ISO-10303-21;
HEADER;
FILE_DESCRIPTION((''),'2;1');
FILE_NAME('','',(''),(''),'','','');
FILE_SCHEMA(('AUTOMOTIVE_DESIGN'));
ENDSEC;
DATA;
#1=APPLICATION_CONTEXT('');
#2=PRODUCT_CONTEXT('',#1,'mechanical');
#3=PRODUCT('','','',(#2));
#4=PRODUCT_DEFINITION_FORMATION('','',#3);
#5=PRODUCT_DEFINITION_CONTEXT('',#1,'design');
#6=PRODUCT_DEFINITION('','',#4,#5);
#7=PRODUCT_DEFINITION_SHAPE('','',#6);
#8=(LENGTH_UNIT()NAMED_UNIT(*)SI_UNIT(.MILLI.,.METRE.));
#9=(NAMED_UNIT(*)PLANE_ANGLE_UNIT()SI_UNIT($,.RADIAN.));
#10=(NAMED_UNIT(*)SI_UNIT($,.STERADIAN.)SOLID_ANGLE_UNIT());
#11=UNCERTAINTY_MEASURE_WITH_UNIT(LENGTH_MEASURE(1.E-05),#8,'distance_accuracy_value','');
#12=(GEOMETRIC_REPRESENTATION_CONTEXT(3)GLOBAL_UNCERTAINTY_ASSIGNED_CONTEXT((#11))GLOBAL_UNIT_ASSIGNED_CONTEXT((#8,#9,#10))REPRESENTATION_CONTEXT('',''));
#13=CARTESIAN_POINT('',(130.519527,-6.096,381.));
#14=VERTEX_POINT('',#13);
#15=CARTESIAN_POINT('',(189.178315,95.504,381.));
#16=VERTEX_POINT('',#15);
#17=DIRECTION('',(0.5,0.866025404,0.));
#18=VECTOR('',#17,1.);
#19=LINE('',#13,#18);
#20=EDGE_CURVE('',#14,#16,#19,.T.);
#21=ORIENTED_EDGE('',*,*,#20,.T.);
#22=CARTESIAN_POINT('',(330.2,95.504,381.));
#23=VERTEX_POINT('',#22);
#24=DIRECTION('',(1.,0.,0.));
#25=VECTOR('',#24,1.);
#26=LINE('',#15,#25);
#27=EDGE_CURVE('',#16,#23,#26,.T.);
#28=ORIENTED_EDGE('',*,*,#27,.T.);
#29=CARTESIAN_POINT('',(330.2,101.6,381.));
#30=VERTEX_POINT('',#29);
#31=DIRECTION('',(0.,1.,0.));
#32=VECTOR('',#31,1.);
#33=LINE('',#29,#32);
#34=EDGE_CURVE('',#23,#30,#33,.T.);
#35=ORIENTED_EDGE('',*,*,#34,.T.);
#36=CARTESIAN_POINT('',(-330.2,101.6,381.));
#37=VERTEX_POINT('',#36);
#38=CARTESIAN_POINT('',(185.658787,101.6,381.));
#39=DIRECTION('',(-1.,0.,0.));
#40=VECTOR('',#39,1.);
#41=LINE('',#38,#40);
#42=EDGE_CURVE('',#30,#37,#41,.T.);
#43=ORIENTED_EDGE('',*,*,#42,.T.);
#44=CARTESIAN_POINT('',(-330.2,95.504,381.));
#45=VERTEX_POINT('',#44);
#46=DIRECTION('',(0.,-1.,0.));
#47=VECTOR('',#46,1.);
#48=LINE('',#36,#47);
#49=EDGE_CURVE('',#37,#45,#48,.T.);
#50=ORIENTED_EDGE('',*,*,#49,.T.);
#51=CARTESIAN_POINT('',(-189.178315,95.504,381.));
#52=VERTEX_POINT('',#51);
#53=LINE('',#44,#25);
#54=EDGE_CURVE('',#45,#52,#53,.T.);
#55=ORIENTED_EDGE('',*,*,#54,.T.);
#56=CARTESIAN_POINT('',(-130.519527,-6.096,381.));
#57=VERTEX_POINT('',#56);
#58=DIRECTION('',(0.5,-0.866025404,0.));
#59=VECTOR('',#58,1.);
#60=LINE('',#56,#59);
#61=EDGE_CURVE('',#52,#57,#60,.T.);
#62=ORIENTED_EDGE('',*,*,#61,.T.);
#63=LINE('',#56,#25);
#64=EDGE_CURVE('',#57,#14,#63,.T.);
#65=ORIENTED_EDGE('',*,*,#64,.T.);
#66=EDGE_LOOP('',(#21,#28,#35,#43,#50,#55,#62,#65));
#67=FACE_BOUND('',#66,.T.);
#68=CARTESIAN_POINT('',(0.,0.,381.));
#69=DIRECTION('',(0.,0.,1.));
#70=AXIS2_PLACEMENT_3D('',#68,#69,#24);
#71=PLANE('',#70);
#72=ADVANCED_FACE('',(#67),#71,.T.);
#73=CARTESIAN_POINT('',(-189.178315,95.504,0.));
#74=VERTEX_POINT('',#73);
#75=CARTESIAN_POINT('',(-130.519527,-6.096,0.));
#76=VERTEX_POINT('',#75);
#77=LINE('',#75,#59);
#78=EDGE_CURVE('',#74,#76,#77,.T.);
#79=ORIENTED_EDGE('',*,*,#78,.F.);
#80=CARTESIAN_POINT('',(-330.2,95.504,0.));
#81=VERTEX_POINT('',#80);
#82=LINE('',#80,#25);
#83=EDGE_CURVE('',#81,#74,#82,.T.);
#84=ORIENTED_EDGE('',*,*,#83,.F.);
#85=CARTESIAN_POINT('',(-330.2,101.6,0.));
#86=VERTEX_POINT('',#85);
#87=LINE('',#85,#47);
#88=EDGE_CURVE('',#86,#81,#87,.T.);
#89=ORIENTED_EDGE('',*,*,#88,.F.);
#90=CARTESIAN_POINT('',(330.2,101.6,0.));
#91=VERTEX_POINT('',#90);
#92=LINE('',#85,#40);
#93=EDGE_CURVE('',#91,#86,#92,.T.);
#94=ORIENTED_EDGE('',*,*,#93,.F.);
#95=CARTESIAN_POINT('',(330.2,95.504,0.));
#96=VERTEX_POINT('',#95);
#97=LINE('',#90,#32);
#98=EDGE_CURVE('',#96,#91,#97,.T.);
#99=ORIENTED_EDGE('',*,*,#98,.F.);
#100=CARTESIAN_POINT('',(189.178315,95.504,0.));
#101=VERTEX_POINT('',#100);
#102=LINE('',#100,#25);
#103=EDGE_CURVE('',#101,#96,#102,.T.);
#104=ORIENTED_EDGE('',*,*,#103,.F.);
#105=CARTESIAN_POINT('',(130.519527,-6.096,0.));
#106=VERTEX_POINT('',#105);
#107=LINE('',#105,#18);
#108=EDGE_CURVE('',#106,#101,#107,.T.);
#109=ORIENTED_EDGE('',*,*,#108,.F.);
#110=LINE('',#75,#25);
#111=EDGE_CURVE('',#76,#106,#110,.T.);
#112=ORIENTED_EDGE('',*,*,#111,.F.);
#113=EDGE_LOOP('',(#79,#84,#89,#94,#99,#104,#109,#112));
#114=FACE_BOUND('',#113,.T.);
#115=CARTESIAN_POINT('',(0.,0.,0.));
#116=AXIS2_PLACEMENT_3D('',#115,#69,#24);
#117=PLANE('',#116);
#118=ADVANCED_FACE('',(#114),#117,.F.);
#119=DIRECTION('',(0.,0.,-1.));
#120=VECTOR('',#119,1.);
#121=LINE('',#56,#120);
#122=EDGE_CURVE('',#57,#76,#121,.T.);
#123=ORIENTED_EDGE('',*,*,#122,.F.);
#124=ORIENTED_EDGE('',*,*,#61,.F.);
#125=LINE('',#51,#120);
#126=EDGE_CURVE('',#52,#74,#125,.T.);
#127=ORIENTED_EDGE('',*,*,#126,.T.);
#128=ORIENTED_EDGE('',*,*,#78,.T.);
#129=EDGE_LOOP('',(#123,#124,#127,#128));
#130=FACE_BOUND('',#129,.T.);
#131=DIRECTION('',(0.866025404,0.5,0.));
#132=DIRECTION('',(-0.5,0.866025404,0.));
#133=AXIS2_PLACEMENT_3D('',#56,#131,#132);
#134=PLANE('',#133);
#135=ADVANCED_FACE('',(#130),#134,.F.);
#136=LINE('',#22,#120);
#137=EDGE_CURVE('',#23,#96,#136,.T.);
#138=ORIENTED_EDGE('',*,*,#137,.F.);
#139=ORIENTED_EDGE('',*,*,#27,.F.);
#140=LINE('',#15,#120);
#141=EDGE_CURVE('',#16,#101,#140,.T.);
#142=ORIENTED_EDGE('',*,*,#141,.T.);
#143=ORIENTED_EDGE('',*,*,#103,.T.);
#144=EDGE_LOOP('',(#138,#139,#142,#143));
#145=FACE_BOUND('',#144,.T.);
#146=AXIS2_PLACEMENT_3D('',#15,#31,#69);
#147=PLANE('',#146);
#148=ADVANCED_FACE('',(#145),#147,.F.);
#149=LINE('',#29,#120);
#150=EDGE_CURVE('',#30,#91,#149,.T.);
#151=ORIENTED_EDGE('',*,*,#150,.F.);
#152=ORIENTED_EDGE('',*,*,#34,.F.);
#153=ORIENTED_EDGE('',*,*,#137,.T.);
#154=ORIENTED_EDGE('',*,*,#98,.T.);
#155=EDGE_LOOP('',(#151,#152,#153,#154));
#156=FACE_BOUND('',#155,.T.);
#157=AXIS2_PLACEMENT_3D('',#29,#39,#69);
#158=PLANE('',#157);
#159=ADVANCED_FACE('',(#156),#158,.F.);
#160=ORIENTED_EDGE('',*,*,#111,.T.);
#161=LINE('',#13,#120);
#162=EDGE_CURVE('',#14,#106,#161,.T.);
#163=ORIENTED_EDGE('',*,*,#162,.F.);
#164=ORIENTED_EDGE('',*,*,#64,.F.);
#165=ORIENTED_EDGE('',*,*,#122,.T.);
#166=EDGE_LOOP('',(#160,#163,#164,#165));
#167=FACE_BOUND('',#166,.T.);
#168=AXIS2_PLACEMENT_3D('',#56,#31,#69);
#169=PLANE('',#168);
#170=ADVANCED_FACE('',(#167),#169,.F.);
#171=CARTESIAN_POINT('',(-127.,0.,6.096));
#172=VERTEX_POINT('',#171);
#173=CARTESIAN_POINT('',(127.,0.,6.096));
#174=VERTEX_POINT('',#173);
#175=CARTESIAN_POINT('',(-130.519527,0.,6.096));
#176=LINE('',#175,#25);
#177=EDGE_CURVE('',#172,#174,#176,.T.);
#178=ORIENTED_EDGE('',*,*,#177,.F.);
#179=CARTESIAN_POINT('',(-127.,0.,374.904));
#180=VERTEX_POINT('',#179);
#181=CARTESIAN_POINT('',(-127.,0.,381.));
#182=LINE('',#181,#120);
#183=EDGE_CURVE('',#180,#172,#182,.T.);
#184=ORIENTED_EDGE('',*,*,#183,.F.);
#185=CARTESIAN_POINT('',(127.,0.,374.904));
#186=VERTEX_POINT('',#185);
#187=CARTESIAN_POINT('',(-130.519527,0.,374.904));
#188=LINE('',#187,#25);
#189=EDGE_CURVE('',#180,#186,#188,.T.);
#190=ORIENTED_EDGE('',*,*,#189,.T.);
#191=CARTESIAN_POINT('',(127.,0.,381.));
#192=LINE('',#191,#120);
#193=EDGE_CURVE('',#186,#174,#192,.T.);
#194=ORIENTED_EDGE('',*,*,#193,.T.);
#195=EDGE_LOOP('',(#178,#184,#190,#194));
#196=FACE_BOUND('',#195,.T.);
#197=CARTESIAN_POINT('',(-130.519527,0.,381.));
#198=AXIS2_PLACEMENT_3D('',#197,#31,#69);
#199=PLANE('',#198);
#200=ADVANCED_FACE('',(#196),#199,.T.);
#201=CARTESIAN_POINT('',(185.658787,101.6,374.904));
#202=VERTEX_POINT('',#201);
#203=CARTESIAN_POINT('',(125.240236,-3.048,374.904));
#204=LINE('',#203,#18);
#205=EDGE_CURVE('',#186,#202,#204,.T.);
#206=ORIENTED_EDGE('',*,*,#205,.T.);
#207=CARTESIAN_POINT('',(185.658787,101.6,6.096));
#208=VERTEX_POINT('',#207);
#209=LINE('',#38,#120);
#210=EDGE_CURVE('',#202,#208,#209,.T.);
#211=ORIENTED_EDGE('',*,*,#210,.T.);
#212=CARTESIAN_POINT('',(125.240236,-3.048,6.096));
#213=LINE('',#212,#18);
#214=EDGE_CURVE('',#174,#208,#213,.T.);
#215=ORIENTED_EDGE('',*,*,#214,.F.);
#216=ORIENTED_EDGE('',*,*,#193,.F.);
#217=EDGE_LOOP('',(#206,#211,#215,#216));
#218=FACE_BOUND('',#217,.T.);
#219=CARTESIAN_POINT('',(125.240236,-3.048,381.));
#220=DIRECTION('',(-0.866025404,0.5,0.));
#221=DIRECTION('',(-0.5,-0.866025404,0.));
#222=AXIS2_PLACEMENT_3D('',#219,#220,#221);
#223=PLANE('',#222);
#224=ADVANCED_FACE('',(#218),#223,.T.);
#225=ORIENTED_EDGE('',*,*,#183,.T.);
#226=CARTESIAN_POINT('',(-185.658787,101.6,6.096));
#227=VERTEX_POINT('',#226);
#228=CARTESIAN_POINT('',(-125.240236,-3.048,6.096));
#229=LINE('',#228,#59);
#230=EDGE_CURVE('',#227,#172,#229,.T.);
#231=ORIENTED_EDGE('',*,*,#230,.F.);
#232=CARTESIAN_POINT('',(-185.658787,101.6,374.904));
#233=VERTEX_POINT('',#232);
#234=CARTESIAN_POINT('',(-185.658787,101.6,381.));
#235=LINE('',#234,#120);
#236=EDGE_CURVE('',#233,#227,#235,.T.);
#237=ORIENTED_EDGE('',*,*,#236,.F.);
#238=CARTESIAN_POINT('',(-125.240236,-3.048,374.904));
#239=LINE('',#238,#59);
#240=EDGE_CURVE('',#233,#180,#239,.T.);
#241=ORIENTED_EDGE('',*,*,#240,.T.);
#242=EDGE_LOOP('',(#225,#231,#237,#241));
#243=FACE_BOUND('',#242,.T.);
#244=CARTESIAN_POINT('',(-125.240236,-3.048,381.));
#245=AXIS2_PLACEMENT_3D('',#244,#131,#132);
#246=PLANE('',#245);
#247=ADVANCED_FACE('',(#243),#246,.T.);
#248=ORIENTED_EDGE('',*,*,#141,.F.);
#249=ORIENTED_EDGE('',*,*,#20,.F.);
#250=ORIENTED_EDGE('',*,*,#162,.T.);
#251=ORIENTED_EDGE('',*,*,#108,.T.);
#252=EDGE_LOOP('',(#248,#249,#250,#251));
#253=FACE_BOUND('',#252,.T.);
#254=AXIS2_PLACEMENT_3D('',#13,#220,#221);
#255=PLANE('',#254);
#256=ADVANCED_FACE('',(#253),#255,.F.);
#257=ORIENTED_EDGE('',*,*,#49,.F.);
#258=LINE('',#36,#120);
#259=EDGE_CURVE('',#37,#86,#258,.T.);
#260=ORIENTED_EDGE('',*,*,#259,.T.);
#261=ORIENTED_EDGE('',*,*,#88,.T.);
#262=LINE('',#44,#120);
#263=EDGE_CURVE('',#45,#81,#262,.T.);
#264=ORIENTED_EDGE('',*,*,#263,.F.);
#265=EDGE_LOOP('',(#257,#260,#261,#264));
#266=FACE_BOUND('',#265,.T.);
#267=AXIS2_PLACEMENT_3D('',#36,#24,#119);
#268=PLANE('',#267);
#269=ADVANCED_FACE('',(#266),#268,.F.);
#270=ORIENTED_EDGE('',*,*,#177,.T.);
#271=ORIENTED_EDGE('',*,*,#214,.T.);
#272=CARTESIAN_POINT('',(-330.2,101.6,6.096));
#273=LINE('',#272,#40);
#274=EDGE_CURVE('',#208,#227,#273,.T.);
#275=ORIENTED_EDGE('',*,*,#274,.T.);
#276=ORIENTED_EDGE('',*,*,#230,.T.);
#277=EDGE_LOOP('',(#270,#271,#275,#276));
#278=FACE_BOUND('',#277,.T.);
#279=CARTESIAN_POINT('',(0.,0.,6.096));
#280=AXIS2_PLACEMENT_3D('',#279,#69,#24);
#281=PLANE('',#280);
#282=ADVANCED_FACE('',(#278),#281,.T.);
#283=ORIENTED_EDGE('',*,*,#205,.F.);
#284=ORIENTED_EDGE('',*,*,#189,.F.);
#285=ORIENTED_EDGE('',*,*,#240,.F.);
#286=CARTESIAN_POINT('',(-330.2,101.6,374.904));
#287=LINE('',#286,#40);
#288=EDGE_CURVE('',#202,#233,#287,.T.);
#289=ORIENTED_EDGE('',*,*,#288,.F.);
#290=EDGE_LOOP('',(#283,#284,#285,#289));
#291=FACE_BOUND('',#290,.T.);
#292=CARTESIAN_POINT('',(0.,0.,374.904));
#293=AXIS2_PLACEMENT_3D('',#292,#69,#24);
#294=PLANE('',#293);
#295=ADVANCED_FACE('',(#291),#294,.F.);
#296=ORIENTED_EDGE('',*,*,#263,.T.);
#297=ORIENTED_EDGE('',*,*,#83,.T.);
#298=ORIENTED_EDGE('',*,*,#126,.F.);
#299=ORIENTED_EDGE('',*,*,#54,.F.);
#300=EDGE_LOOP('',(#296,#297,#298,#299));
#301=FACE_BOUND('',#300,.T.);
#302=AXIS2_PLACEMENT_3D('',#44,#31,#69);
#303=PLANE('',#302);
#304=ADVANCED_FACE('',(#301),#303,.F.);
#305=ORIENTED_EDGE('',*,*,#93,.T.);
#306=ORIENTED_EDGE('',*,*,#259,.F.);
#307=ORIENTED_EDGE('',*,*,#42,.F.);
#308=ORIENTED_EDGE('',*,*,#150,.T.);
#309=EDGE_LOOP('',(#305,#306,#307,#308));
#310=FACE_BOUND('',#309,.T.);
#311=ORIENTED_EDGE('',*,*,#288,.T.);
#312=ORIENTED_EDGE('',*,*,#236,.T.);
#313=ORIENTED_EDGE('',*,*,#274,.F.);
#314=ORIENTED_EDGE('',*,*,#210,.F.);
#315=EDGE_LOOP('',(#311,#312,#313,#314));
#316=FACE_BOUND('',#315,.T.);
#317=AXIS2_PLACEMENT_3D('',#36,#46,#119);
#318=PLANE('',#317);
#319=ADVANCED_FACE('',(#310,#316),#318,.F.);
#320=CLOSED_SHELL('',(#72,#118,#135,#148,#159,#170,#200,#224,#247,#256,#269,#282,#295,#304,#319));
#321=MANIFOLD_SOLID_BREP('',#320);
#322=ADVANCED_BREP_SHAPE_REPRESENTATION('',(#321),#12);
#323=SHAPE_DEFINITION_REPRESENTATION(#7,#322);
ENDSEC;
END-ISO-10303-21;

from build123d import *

# Parameters (mm, degrees)
BOSS_EXTRUDE2_DEPTH = 381
SHELL1_START        = 6.096
SHELL1_DEPTH        = 368.808


# Read off the part's stored shape, not the designer's step: Shell1
with BuildPart() as part:
    # Sketch2 → Boss-Extrude2 (new body)
    with BuildSketch(Plane.XY):
        Polygon((-330.2, 101.6), (-185.65878735, 101.6), (185.65878735, 101.6), (330.2, 101.6), (330.2, 95.504), (189.178314591, 95.504), (130.519527241, -6.096), (-130.519527241, -6.096), (-189.178314591, 95.504), (-330.2, 95.504), align=None)
    extrude(amount=BOSS_EXTRUDE2_DEPTH)

    # Shell1 outline → Shell1 (cut)
    with BuildSketch(Plane.XY.offset(SHELL1_START)):
        Polygon((-185.65878735, 101.6), (-127, 0), (127, 0), (185.65878735, 101.6), align=None)
    extrude(amount=SHELL1_DEPTH, mode=Mode.SUBTRACT)


solid = part.part
